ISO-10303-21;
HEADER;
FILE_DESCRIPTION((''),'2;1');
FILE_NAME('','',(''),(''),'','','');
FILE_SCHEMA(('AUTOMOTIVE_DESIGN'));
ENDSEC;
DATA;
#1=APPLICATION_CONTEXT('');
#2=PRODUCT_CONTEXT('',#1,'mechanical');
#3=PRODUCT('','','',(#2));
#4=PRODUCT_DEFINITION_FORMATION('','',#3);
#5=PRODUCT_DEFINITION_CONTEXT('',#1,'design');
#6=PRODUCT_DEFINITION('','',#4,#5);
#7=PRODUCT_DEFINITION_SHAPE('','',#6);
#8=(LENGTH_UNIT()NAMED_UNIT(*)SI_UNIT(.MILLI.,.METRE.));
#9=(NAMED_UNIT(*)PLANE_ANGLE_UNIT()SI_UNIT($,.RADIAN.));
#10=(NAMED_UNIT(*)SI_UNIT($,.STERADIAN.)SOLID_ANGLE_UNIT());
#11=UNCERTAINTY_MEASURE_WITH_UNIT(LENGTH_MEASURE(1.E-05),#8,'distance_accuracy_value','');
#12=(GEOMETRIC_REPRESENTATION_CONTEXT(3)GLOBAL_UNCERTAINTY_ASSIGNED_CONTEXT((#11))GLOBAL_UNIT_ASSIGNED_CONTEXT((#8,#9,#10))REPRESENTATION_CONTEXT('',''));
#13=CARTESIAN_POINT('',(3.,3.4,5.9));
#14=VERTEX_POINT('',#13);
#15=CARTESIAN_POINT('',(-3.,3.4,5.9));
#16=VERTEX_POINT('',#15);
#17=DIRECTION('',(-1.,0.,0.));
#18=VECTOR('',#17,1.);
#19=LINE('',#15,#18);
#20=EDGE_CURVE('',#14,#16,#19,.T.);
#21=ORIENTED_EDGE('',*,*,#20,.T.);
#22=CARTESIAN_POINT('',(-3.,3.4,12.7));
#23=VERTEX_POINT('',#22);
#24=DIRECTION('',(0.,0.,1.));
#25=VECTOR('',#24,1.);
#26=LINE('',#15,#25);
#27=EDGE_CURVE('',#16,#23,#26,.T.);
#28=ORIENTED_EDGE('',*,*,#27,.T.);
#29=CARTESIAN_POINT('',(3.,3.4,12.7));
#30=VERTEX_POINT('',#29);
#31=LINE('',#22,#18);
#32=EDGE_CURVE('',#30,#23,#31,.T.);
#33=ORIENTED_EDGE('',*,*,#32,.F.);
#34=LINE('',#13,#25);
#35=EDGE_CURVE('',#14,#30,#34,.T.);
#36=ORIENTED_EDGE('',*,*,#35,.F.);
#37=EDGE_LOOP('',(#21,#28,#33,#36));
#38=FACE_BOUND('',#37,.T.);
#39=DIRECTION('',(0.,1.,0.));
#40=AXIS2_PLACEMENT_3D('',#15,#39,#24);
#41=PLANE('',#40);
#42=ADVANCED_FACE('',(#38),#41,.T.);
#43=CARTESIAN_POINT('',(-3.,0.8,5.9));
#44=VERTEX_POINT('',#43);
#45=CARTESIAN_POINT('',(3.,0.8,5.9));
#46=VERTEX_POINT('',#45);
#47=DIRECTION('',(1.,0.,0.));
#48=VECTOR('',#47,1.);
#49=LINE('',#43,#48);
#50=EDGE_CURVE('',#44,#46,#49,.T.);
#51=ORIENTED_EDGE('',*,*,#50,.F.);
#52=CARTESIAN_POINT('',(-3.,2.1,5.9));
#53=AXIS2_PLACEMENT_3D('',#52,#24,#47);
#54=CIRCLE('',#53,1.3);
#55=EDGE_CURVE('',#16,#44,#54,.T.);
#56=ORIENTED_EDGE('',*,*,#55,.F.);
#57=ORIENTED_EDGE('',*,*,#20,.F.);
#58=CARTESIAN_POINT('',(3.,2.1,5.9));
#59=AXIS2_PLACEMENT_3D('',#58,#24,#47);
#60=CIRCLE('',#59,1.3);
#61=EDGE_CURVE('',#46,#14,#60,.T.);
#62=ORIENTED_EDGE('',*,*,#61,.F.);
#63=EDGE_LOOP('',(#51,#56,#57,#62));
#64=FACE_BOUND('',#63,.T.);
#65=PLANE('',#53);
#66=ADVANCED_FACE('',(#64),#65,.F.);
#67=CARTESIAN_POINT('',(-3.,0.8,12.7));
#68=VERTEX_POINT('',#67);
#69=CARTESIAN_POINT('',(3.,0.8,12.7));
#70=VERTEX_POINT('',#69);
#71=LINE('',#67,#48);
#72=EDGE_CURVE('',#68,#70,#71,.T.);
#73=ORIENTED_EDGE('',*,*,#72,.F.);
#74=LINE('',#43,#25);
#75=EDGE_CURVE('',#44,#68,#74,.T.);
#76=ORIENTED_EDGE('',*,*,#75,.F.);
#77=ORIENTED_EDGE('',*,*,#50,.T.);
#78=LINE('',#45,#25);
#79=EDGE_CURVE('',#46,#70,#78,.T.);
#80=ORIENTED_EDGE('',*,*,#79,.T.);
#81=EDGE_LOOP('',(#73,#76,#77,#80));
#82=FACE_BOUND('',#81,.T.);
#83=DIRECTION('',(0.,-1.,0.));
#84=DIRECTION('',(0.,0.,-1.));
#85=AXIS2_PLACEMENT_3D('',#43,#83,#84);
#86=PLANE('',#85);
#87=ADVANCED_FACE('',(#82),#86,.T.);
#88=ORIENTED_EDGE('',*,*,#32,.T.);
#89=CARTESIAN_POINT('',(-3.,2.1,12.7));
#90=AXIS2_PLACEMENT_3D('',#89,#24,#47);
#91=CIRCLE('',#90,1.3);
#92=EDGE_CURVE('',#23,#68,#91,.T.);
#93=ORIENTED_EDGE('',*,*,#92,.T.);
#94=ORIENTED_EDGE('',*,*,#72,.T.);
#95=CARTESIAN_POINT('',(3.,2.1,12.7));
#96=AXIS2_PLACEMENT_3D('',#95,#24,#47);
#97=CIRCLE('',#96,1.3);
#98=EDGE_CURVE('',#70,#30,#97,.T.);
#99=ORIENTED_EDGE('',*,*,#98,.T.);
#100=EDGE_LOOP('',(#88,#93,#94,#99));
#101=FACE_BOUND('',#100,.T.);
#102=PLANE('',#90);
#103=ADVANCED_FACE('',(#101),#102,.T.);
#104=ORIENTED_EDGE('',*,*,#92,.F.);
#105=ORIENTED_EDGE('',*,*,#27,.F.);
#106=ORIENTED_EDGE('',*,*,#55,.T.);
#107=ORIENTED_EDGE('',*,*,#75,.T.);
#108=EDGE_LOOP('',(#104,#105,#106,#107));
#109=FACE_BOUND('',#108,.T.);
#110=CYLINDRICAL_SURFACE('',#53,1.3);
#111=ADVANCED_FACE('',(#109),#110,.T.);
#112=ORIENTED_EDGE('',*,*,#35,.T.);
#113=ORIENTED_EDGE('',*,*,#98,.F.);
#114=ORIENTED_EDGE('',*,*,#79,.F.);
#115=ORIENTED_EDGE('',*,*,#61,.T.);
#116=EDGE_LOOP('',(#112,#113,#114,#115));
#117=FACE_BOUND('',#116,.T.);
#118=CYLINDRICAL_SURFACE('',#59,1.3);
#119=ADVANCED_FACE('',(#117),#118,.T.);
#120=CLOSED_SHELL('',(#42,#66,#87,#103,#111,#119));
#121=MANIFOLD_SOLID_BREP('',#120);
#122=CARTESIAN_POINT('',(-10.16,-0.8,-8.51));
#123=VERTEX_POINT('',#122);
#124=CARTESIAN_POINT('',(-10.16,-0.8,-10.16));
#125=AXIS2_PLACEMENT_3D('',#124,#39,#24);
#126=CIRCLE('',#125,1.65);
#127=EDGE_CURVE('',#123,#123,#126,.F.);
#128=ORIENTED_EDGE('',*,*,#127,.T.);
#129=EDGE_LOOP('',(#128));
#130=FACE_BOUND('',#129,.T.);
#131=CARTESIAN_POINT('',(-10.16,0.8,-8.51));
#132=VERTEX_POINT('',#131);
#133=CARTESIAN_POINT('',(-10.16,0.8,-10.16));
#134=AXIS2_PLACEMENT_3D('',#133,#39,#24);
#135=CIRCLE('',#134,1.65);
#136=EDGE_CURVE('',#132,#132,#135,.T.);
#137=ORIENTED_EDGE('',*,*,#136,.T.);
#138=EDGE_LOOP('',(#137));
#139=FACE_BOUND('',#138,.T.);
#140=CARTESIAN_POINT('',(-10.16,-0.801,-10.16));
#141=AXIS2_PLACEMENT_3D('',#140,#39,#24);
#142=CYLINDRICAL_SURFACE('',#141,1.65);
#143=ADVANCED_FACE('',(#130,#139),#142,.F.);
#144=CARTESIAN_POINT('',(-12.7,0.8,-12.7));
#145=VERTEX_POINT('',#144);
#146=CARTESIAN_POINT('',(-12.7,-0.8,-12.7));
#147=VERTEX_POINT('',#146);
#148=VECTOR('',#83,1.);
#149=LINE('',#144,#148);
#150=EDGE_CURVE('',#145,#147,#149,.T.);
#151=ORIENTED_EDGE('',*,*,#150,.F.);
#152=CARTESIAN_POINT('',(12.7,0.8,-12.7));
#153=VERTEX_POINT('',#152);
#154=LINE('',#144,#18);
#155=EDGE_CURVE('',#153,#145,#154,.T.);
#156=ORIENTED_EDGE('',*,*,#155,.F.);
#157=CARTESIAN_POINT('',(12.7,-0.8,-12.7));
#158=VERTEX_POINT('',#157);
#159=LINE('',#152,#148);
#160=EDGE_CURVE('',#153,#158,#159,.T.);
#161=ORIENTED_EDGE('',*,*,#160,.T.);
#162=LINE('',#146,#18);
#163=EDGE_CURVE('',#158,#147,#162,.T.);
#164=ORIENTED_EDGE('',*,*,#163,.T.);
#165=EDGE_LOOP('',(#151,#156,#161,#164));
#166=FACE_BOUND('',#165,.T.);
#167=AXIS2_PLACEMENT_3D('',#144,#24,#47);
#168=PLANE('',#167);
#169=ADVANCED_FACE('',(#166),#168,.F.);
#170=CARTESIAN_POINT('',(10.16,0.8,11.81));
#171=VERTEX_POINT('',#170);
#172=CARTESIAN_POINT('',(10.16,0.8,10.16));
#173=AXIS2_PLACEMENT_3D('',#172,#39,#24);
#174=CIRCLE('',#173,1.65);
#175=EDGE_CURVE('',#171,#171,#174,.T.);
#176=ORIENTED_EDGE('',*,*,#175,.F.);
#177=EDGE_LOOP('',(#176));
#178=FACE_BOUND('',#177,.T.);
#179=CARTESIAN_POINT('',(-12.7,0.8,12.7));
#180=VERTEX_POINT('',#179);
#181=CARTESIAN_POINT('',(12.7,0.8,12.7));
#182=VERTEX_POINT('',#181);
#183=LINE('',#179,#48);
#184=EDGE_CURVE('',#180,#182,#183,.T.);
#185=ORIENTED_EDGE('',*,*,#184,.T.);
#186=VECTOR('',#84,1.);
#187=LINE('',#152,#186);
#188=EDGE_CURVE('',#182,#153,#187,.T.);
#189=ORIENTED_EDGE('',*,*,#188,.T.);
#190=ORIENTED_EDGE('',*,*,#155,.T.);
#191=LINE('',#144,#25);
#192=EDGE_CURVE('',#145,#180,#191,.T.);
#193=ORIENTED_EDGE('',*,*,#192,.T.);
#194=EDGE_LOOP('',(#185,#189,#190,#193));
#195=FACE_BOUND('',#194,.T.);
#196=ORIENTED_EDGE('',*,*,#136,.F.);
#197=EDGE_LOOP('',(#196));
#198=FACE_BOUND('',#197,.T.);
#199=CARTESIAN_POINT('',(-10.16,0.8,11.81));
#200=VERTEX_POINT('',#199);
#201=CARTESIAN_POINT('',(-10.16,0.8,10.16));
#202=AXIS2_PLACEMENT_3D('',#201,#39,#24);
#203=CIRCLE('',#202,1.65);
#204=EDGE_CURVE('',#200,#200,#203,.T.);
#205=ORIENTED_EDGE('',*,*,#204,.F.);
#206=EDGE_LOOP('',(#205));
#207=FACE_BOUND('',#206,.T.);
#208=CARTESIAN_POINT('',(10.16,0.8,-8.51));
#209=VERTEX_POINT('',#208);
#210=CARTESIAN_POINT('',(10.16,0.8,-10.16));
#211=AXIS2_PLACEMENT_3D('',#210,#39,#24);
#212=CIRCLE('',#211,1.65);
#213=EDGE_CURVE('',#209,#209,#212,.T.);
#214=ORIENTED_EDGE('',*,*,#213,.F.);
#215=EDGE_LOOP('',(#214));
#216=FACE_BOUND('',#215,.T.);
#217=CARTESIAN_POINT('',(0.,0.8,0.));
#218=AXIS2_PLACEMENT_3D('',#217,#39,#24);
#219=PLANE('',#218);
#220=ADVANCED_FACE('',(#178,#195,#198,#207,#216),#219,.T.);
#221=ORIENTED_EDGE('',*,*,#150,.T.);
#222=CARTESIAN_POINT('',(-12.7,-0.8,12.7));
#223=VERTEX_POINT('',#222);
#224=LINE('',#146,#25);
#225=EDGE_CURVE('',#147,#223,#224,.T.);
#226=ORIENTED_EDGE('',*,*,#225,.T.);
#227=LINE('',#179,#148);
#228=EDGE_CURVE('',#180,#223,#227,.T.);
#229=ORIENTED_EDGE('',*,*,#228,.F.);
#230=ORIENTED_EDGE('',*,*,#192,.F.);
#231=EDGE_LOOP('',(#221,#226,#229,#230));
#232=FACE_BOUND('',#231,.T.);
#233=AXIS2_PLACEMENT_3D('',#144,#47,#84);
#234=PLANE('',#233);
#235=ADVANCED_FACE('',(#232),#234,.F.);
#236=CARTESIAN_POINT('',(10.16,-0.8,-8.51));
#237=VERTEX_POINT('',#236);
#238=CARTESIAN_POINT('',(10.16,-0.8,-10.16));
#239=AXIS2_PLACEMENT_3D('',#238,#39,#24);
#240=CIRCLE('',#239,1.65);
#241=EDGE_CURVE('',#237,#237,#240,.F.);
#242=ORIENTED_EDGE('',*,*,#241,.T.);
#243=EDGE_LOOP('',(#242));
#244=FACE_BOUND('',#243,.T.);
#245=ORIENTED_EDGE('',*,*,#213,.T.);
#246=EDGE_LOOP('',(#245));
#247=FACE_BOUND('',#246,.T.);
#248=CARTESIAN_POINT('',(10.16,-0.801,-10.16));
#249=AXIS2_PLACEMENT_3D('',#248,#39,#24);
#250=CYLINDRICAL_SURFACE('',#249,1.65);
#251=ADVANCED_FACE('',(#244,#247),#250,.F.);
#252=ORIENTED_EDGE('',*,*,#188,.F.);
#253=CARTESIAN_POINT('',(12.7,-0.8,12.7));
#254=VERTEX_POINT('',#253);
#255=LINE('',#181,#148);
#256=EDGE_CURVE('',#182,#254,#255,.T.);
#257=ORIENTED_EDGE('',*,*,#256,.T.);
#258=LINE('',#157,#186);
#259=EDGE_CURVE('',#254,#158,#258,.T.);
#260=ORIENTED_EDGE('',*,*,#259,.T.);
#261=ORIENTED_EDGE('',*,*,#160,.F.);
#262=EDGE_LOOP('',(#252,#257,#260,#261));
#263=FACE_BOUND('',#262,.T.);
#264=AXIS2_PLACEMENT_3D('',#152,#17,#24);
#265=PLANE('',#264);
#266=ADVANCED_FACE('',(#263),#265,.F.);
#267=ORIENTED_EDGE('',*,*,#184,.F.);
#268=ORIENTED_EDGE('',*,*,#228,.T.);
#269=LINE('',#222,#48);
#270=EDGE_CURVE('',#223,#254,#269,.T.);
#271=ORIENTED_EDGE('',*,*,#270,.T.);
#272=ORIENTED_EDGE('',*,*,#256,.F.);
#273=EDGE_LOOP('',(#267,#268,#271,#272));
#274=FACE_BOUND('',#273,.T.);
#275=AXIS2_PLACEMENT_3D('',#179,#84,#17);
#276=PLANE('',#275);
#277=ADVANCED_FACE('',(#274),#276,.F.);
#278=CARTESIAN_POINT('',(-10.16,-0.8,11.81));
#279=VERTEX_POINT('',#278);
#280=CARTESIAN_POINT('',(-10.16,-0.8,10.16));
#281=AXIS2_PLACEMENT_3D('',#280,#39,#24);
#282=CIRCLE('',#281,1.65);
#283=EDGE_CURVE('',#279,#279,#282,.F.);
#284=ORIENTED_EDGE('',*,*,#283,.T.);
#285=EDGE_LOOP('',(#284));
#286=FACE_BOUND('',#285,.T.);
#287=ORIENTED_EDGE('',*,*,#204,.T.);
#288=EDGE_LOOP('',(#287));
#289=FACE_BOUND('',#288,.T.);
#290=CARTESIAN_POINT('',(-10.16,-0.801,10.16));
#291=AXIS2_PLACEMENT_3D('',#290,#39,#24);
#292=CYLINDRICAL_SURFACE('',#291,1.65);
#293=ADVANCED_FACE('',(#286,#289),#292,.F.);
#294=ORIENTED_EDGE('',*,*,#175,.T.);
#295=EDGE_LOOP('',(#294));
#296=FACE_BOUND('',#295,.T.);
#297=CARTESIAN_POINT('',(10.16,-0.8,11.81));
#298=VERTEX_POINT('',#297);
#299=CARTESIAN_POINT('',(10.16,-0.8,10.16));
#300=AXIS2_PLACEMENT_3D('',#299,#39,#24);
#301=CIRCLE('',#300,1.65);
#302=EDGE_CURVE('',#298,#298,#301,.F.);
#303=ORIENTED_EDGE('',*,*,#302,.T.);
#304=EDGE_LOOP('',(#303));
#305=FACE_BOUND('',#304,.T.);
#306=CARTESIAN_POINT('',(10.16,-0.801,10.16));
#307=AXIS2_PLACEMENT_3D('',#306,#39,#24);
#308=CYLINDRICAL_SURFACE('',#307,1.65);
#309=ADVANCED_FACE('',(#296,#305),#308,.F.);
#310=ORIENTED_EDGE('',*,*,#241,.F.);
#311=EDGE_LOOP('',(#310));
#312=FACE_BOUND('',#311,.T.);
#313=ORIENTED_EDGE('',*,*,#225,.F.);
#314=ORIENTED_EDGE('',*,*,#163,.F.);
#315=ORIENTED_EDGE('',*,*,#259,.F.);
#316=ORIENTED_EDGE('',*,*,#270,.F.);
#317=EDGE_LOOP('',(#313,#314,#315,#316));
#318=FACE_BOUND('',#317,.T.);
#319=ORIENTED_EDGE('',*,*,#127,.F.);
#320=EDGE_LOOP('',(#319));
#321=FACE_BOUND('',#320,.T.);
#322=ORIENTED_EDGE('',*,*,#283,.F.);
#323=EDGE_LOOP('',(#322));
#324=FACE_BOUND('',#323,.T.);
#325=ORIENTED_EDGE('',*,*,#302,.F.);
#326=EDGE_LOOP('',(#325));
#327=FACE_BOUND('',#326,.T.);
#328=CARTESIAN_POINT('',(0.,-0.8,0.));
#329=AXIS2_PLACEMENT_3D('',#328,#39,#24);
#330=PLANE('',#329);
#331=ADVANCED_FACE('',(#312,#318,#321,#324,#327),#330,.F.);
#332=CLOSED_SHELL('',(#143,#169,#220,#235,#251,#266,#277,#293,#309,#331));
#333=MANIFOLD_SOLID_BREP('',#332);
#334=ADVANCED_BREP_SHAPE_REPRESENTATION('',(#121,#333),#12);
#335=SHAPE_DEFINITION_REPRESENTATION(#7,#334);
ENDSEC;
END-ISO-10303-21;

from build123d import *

# Parameters (mm, degrees)
SKETCH2_W             = 25.4
SKETCH2_H             = 25.4
BOSS_EXTRUDE1_DEPTH   = 0.8
CUT_EXTRUDE2_REACH    = 20.032
SKETCH5_R             = 1.65
CRVPATTERN1_START     = -0.8
CRVPATTERN1_OUTLINE_R = 1.65
CRVPATTERN1_DEPTH     = 1.6
BOSS_EXTRUDE2_DEPTH   = 6.8


# Read off the part's stored shape, not the designer's step: CrvPattern1
with BuildPart() as part:
    # Sketch2 → Boss-Extrude1 (new, symmetric)
    with BuildSketch(Plane(origin=(0, 0, 0), x_dir=(1, 0, 0), z_dir=(0, 1, 0))):
        Rectangle(SKETCH2_W, SKETCH2_H)
    extrude(amount=BOSS_EXTRUDE1_DEPTH, both=True)

    # Sketch5 → Cut-Extrude2 (cut, up to next)
    with BuildSketch(Plane(origin=(0, 0.8, 0), x_dir=(1, 0, 0), z_dir=(0, 1, 0)), mode=Mode.PRIVATE) as cut_extrude2_sk1:
        with Locations(Location((-10.16, -10.16, 0), (0, 0, 270))):
            Circle(SKETCH5_R)
    cut_extrude2_tool1 = extrude(cut_extrude2_sk1.sketch, amount=-CUT_EXTRUDE2_REACH, mode=Mode.PRIVATE) & part.part
    add(cut_extrude2_tool1.solids().sort_by_distance((-10.16, 0.8, 10.16))[0], mode=Mode.SUBTRACT)

    # CrvPattern1 outline → CrvPattern1 (cut)
    with BuildSketch(Plane(origin=(0, 0, 0), x_dir=(1, 0, 0), z_dir=(0, 1, 0)).offset(CRVPATTERN1_START)):
        with Locations((10.16, 10.16)):
            Circle(CRVPATTERN1_OUTLINE_R)
        with Locations((-10.16, 10.16)):
            Circle(CRVPATTERN1_OUTLINE_R)
        with Locations((10.16, -10.16)):
            Circle(CRVPATTERN1_OUTLINE_R)
    extrude(amount=CRVPATTERN1_DEPTH, mode=Mode.SUBTRACT)


with BuildPart() as body_2:
    # Sketch6 → Boss-Extrude2 (new body)
    with BuildSketch(Plane.XY.offset(12.7)):
        with BuildLine():
            Line((-3, 3.4), (3, 3.4))
            ThreePointArc((3, 3.4), (4.3, 2.1), (3, 0.8))
            Line((3, 0.8), (-3, 0.8))
            ThreePointArc((-3, 0.8), (-4.3, 2.1), (-3, 3.4))
        make_face()
    extrude(amount=-BOSS_EXTRUDE2_DEPTH)


solid = Compound([part.part, body_2.part])
